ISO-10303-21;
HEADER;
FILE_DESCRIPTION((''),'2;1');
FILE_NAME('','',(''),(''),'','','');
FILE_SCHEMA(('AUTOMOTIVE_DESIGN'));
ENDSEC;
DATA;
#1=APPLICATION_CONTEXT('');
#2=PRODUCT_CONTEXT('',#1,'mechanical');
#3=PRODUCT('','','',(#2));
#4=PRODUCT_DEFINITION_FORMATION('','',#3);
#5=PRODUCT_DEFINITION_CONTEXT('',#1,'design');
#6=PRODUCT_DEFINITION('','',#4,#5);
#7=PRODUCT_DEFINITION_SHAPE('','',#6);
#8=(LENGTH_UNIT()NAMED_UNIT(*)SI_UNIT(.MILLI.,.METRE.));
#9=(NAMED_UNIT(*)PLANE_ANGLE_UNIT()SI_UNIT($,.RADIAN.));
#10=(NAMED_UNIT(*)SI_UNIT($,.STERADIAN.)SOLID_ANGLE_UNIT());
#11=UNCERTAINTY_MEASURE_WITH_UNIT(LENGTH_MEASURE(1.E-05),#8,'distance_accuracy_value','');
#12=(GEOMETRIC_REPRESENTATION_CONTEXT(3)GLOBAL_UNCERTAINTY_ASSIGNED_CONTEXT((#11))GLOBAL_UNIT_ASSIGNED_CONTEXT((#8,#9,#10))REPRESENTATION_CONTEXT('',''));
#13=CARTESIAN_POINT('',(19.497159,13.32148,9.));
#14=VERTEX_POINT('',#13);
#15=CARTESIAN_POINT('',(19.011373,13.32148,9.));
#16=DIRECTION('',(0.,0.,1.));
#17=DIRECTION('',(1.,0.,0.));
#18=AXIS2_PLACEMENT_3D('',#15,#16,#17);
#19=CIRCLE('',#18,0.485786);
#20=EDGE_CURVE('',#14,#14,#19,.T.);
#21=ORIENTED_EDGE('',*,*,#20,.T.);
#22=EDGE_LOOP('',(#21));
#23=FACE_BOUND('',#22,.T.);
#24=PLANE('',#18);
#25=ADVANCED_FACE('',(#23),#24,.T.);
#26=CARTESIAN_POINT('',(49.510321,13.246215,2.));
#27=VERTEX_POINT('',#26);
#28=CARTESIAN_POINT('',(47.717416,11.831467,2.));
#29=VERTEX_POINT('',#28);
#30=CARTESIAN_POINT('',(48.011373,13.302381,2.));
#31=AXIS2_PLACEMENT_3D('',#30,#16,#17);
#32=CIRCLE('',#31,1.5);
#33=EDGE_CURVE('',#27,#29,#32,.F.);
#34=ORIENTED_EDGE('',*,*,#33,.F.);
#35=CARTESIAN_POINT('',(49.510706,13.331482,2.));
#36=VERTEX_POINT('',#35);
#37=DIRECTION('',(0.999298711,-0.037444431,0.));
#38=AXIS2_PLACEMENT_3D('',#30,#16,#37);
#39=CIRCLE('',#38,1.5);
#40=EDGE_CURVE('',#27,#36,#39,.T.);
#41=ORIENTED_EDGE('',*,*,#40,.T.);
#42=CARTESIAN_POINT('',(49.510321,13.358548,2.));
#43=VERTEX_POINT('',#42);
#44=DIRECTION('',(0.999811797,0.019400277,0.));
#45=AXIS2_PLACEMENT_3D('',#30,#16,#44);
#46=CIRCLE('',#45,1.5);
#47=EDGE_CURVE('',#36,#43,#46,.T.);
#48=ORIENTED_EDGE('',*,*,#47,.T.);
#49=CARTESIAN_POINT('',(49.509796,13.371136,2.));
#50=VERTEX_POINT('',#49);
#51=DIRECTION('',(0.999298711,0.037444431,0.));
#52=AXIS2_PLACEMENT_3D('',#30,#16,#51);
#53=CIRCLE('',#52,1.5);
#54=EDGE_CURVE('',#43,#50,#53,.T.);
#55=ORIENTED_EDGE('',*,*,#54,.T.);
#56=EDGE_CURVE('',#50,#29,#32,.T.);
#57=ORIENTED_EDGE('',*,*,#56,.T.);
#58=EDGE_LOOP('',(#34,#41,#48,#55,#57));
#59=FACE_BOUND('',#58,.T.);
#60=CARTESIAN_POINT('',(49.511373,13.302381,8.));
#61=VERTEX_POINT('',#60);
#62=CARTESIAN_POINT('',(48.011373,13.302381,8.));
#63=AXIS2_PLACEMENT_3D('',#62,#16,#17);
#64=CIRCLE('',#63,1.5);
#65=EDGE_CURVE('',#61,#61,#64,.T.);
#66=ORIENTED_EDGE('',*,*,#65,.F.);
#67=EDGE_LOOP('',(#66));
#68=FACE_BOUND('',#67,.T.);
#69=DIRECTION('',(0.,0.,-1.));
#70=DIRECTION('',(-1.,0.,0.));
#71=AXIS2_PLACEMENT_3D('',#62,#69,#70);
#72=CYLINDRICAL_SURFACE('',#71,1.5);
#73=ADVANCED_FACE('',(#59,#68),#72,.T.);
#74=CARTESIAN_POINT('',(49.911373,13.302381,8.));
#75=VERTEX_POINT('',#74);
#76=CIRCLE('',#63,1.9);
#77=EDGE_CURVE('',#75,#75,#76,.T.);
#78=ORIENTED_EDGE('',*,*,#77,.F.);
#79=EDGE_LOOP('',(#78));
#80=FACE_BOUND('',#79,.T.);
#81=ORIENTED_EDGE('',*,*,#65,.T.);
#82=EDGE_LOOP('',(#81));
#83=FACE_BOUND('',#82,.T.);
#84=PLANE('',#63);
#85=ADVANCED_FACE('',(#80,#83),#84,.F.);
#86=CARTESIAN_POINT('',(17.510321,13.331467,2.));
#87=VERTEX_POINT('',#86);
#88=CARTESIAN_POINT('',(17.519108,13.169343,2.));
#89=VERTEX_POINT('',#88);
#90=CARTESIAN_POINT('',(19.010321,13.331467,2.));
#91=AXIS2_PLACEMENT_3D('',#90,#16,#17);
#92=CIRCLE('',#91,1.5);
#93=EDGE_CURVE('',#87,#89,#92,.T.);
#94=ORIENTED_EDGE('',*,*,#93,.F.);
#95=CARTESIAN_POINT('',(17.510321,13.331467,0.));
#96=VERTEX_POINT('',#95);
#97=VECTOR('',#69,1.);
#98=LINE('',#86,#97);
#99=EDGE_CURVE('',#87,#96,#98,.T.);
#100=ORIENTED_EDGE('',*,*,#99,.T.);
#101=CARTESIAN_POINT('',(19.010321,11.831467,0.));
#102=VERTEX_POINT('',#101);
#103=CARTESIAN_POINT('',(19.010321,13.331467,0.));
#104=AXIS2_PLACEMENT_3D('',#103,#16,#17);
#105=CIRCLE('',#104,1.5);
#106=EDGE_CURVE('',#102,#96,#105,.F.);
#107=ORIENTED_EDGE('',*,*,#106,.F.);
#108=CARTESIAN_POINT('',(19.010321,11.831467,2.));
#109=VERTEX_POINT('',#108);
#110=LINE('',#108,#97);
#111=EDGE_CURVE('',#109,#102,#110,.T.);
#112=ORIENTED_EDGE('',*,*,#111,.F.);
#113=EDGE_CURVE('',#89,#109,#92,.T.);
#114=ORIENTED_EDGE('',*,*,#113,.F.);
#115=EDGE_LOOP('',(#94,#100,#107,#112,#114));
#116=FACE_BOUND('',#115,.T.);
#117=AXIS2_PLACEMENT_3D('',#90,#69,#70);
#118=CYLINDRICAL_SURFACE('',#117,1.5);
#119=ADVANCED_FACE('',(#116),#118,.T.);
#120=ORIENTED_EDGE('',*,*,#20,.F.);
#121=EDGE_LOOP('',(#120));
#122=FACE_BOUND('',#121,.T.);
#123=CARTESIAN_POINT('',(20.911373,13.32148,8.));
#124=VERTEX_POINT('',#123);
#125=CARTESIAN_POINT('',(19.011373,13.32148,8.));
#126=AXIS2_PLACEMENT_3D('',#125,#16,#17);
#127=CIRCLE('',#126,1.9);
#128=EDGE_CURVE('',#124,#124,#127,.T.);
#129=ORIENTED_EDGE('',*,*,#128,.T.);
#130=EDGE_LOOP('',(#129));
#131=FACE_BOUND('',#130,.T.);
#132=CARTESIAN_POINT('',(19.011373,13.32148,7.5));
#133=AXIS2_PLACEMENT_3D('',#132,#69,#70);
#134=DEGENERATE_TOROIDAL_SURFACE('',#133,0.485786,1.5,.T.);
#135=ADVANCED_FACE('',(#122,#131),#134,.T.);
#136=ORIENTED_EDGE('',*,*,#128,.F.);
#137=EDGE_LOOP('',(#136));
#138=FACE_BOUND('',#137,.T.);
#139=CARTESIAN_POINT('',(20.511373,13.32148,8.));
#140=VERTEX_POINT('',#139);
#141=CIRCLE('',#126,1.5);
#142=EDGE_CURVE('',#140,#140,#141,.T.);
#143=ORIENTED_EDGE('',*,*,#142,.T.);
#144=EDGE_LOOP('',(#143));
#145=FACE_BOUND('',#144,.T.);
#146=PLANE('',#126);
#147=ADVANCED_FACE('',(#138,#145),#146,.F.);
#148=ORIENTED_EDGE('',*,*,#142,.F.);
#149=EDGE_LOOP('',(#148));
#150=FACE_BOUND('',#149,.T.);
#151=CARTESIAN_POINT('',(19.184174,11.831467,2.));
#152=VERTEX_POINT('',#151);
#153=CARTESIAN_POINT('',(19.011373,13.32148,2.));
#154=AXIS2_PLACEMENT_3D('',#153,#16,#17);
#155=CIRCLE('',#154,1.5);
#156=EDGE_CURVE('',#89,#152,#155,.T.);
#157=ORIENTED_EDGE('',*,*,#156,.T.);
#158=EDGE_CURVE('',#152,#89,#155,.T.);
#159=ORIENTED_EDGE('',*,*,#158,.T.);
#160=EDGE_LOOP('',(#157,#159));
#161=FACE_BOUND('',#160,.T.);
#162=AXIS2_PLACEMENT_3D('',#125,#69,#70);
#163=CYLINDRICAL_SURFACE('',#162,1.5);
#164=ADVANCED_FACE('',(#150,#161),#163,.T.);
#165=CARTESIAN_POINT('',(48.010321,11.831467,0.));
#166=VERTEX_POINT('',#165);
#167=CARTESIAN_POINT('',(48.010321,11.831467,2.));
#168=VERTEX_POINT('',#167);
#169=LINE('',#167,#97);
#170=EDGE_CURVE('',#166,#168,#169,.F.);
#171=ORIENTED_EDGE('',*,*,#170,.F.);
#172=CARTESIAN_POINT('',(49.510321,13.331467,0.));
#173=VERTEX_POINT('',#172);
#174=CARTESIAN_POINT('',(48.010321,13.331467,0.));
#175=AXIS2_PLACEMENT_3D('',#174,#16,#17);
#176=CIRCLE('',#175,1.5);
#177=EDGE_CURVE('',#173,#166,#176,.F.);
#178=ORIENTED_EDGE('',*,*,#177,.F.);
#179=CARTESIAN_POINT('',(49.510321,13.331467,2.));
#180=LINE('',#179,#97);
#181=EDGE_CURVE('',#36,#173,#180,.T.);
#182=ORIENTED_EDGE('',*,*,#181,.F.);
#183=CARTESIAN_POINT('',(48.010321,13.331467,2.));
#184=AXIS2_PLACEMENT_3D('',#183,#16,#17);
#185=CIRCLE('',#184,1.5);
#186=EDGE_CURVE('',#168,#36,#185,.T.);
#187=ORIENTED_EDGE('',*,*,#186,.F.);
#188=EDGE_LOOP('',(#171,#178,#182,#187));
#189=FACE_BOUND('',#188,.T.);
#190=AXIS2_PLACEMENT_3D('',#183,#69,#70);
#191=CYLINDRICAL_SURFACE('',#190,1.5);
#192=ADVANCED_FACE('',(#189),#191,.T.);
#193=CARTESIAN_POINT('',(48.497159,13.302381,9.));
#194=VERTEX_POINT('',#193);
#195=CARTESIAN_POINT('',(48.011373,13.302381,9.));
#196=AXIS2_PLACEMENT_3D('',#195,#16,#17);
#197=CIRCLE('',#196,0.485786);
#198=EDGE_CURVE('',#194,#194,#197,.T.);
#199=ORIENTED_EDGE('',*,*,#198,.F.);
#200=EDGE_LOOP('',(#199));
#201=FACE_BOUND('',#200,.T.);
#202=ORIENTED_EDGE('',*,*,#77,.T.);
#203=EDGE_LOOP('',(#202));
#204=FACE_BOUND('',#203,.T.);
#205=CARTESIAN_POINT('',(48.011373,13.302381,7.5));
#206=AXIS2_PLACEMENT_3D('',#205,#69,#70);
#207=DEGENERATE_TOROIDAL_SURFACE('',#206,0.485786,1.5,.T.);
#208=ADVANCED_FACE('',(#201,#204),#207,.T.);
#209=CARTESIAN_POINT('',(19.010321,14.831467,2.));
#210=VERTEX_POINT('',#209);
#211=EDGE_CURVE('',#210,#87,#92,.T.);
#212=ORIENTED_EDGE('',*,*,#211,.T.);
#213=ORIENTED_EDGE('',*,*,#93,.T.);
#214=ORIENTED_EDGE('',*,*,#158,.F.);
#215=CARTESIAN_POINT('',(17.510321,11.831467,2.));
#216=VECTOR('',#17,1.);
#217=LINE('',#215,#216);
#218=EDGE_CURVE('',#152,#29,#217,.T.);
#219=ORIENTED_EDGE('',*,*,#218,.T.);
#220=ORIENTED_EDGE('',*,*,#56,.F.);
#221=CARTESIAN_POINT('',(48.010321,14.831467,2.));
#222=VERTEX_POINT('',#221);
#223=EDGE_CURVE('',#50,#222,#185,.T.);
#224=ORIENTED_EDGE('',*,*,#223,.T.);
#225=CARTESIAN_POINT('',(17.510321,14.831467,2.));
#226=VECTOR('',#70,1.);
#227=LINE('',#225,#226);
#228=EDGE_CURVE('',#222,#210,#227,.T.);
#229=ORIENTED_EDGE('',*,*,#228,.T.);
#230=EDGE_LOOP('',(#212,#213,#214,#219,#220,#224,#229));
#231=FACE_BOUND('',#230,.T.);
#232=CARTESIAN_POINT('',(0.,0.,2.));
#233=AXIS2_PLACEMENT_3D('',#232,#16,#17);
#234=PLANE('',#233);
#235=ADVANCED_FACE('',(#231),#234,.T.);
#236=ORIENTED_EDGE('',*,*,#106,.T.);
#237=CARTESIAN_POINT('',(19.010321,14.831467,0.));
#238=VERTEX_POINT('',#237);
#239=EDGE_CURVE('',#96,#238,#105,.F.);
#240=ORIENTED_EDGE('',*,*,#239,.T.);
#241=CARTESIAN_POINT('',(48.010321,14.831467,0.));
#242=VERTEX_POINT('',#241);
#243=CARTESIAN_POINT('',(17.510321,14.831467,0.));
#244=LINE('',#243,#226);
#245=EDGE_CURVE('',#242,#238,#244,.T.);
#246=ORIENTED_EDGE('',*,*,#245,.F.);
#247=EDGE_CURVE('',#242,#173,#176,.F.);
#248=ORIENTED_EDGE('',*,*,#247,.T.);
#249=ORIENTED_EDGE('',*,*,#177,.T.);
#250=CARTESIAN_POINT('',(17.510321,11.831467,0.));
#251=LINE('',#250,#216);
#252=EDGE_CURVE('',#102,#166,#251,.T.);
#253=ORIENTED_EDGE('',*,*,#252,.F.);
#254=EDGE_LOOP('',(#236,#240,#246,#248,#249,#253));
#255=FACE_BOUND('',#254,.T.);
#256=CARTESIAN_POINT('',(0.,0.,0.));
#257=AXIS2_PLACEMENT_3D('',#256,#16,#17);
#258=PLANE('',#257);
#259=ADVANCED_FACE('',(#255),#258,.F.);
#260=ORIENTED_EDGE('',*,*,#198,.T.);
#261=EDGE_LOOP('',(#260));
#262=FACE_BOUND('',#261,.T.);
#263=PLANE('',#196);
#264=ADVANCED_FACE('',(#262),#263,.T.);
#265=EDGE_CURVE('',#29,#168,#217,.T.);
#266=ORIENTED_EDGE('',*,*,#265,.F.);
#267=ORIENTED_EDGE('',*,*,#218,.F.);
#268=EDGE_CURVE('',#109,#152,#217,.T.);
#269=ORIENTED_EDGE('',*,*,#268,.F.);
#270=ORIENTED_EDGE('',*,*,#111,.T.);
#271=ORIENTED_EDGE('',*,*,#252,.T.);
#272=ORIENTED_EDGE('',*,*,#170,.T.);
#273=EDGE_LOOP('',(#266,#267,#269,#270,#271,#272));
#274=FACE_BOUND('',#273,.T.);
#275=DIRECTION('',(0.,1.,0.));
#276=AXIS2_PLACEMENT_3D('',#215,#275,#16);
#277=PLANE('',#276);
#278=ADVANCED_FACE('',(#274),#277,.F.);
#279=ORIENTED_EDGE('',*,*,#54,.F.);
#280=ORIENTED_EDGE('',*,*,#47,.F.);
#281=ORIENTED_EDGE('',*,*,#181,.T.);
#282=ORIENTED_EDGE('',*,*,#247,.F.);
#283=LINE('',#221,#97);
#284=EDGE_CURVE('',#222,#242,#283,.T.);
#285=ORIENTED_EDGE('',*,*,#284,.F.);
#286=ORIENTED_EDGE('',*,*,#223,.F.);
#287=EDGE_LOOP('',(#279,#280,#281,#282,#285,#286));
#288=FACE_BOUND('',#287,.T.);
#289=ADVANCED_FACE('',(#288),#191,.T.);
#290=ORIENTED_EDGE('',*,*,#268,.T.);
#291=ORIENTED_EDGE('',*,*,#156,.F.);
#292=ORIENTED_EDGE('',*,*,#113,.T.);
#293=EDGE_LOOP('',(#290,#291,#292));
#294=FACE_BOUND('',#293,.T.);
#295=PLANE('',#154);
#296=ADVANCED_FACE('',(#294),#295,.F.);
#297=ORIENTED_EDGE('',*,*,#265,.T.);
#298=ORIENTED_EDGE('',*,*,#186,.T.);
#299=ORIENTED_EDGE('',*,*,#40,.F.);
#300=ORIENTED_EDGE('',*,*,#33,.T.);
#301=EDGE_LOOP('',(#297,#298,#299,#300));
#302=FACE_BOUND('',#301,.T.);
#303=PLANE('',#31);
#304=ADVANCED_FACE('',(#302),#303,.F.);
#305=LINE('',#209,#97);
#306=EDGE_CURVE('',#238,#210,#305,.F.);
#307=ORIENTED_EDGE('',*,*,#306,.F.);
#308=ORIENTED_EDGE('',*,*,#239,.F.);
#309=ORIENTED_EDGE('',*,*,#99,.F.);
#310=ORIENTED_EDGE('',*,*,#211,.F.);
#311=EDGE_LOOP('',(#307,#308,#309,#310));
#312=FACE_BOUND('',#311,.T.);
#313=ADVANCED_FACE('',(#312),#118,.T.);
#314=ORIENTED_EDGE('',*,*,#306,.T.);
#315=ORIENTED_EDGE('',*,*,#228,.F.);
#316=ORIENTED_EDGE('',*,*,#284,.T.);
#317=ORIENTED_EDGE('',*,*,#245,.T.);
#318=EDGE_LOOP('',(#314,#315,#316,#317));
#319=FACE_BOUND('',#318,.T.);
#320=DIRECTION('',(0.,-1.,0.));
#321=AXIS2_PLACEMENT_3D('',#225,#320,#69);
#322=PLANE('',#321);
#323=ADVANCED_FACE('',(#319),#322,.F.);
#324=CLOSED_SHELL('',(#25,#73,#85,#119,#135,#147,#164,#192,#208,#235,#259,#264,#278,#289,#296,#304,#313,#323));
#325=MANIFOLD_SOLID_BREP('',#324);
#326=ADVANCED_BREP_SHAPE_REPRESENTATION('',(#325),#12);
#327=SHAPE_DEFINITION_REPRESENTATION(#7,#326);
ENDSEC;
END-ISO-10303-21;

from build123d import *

# Parameters (mm, degrees)
ESQUISSE1_W        = 32
ESQUISSE1_H        = 3
BOSS_EXTRU_2_DEPTH = 2
ESQUISSE4_R        = 1.5
BOSS_EXTRU_3_DEPTH = 6
ESQUISSE5_R        = 1.9
BOSS_EXTRU_4_DEPTH = 1
CONG_13_R          = 1.5
CONG_14_R          = 1.5
CONG_16_R          = 1.5
CONG_17_R          = 1.5


with BuildPart() as part:
    # Esquisse1 → Boss.-Extru.2 (new body)
    with BuildSketch(Plane(origin=(-13.705479482, 0.648434545, 0), x_dir=(1, 0, 0), z_dir=(0, 0, 1))):
        with Locations((47.215800187, 12.683032093)):
            Rectangle(ESQUISSE1_W, ESQUISSE1_H)
    extrude(amount=BOSS_EXTRU_2_DEPTH)

    # Esquisse4 → Boss.-Extru.3 (add)
    with BuildSketch(Plane(origin=(-13.705479482, 4.052004393, 2), x_dir=(1, 0, 0), z_dir=(0, 0, 1))):
        with Locations(Location((32.71685212, 9.269475593, 0), (0, 0, 263.384796373))):
            Circle(ESQUISSE4_R)
        with Locations(Location((61.71685212, 9.250376763, 0), (0, 0, 258.698543871))):
            Circle(ESQUISSE4_R)
    extrude(amount=BOSS_EXTRU_3_DEPTH)

    # Esquisse5 → Boss.-Extru.4 (add)
    with BuildSketch(Plane(origin=(-13.705479482, 4.052004393, 8), x_dir=(1, 0, 0), z_dir=(0, 0, 1))):
        with Locations((32.71685212, 9.269475593)):
            Circle(ESQUISSE5_R)
        with Locations((61.71685212, 9.250376763)):
            Circle(ESQUISSE5_R)
    extrude(amount=BOSS_EXTRU_4_DEPTH)

    # Congé13
    # the kernel refuses this fillet: 1.5 mm, written as the material it takes off along each edge
    with BuildSketch(Plane(origin=(49.510320705, 14.831466639, -3.75), x_dir=(0, -1, 0), z_dir=(0, 0, 1)), Plane(origin=(49.510320705, 11.831466639, -3.75), x_dir=(-1, 0, 0), z_dir=(0, 0, 1))) as cong_13_piece_1:
        with BuildLine():
            CenterArc((CONG_13_R, -CONG_13_R), CONG_13_R, 90, 90)
            Line((0, -CONG_13_R), (0, 0))
            Line((0, 0), (CONG_13_R, 0))
        make_face()
    extrude(amount=5.75, mode=Mode.SUBTRACT)

    # Congé14
    # the kernel refuses this fillet: 1.5 mm, written as the material it takes off along each edge
    with BuildSketch(Plane(origin=(17.510320705, 11.831466639, -3.75), x_dir=(0, 1, 0), z_dir=(0, 0, 1))) as cong_14_piece_1:
        with BuildLine():
            CenterArc((CONG_14_R, -CONG_14_R), CONG_14_R, 90, 90)
            Line((0, -CONG_14_R), (0, 0))
            Line((0, 0), (CONG_14_R, 0))
        make_face()
    extrude(amount=5.75, mode=Mode.SUBTRACT)
    with BuildSketch(Plane(origin=(17.510320705, 14.831466639, -3.75), x_dir=(0, -1, 0), z_dir=(0, 0, 1))) as cong_14_piece_2:
        with BuildLine():
            CenterArc((CONG_14_R, CONG_14_R), CONG_14_R, 180, 90)
            Line((0, CONG_14_R), (0, 0))
            Line((0, 0), (CONG_14_R, 0))
        make_face()
    extrude(amount=9.5, mode=Mode.SUBTRACT)

    # Congé16
    # the kernel refuses this fillet: 1.5 mm, written as the material it takes off along each edge
    with BuildSketch(Plane(origin=(48.011372638, 13.302381156, 9), x_dir=(1, 0, 0), z_dir=(0, -1, 0))) as cong_16_piece_1:
        with BuildLine():
            CenterArc((0.485786438, -1.5), CONG_16_R, 19.471220634, 70.528779366)
            Line((0.485786438, 0), (0.485786438, 0.03))
            Line((0.485786438, 0.03), (1.9, 0.03))
            Line((1.9, 0.03), (1.93, 0))
            ThreePointArc((1.93, 0), (1.93, -0.5), (1.928284271, -0.99))
            Line((1.928284271, -0.99), (1.9, -1))
        make_face()
    revolve(axis=Axis((48.011372638, 13.302381156, 9), (0, 0, 1)), mode=Mode.SUBTRACT)

    # Congé17
    # the kernel refuses this fillet: 1.5 mm, written as the material it takes off along each edge
    with BuildSketch(Plane(origin=(19.011372638, 13.321479986, 9), x_dir=(1, 0, 0), z_dir=(0, -1, 0))) as cong_17_piece_1:
        with BuildLine():
            CenterArc((0.485786438, -1.5), CONG_17_R, 19.471220634, 70.528779366)
            Line((0.485786438, 0), (0.485786438, 0.03))
            Line((0.485786438, 0.03), (1.9, 0.03))
            Line((1.9, 0.03), (1.93, 0))
            ThreePointArc((1.93, 0), (1.93, -0.5), (1.928284271, -0.99))
            Line((1.928284271, -0.99), (1.9, -1))
        make_face()
    revolve(axis=Axis((19.011372638, 13.321479986, 9), (0, 0, 1)), mode=Mode.SUBTRACT)


solid = part.part
